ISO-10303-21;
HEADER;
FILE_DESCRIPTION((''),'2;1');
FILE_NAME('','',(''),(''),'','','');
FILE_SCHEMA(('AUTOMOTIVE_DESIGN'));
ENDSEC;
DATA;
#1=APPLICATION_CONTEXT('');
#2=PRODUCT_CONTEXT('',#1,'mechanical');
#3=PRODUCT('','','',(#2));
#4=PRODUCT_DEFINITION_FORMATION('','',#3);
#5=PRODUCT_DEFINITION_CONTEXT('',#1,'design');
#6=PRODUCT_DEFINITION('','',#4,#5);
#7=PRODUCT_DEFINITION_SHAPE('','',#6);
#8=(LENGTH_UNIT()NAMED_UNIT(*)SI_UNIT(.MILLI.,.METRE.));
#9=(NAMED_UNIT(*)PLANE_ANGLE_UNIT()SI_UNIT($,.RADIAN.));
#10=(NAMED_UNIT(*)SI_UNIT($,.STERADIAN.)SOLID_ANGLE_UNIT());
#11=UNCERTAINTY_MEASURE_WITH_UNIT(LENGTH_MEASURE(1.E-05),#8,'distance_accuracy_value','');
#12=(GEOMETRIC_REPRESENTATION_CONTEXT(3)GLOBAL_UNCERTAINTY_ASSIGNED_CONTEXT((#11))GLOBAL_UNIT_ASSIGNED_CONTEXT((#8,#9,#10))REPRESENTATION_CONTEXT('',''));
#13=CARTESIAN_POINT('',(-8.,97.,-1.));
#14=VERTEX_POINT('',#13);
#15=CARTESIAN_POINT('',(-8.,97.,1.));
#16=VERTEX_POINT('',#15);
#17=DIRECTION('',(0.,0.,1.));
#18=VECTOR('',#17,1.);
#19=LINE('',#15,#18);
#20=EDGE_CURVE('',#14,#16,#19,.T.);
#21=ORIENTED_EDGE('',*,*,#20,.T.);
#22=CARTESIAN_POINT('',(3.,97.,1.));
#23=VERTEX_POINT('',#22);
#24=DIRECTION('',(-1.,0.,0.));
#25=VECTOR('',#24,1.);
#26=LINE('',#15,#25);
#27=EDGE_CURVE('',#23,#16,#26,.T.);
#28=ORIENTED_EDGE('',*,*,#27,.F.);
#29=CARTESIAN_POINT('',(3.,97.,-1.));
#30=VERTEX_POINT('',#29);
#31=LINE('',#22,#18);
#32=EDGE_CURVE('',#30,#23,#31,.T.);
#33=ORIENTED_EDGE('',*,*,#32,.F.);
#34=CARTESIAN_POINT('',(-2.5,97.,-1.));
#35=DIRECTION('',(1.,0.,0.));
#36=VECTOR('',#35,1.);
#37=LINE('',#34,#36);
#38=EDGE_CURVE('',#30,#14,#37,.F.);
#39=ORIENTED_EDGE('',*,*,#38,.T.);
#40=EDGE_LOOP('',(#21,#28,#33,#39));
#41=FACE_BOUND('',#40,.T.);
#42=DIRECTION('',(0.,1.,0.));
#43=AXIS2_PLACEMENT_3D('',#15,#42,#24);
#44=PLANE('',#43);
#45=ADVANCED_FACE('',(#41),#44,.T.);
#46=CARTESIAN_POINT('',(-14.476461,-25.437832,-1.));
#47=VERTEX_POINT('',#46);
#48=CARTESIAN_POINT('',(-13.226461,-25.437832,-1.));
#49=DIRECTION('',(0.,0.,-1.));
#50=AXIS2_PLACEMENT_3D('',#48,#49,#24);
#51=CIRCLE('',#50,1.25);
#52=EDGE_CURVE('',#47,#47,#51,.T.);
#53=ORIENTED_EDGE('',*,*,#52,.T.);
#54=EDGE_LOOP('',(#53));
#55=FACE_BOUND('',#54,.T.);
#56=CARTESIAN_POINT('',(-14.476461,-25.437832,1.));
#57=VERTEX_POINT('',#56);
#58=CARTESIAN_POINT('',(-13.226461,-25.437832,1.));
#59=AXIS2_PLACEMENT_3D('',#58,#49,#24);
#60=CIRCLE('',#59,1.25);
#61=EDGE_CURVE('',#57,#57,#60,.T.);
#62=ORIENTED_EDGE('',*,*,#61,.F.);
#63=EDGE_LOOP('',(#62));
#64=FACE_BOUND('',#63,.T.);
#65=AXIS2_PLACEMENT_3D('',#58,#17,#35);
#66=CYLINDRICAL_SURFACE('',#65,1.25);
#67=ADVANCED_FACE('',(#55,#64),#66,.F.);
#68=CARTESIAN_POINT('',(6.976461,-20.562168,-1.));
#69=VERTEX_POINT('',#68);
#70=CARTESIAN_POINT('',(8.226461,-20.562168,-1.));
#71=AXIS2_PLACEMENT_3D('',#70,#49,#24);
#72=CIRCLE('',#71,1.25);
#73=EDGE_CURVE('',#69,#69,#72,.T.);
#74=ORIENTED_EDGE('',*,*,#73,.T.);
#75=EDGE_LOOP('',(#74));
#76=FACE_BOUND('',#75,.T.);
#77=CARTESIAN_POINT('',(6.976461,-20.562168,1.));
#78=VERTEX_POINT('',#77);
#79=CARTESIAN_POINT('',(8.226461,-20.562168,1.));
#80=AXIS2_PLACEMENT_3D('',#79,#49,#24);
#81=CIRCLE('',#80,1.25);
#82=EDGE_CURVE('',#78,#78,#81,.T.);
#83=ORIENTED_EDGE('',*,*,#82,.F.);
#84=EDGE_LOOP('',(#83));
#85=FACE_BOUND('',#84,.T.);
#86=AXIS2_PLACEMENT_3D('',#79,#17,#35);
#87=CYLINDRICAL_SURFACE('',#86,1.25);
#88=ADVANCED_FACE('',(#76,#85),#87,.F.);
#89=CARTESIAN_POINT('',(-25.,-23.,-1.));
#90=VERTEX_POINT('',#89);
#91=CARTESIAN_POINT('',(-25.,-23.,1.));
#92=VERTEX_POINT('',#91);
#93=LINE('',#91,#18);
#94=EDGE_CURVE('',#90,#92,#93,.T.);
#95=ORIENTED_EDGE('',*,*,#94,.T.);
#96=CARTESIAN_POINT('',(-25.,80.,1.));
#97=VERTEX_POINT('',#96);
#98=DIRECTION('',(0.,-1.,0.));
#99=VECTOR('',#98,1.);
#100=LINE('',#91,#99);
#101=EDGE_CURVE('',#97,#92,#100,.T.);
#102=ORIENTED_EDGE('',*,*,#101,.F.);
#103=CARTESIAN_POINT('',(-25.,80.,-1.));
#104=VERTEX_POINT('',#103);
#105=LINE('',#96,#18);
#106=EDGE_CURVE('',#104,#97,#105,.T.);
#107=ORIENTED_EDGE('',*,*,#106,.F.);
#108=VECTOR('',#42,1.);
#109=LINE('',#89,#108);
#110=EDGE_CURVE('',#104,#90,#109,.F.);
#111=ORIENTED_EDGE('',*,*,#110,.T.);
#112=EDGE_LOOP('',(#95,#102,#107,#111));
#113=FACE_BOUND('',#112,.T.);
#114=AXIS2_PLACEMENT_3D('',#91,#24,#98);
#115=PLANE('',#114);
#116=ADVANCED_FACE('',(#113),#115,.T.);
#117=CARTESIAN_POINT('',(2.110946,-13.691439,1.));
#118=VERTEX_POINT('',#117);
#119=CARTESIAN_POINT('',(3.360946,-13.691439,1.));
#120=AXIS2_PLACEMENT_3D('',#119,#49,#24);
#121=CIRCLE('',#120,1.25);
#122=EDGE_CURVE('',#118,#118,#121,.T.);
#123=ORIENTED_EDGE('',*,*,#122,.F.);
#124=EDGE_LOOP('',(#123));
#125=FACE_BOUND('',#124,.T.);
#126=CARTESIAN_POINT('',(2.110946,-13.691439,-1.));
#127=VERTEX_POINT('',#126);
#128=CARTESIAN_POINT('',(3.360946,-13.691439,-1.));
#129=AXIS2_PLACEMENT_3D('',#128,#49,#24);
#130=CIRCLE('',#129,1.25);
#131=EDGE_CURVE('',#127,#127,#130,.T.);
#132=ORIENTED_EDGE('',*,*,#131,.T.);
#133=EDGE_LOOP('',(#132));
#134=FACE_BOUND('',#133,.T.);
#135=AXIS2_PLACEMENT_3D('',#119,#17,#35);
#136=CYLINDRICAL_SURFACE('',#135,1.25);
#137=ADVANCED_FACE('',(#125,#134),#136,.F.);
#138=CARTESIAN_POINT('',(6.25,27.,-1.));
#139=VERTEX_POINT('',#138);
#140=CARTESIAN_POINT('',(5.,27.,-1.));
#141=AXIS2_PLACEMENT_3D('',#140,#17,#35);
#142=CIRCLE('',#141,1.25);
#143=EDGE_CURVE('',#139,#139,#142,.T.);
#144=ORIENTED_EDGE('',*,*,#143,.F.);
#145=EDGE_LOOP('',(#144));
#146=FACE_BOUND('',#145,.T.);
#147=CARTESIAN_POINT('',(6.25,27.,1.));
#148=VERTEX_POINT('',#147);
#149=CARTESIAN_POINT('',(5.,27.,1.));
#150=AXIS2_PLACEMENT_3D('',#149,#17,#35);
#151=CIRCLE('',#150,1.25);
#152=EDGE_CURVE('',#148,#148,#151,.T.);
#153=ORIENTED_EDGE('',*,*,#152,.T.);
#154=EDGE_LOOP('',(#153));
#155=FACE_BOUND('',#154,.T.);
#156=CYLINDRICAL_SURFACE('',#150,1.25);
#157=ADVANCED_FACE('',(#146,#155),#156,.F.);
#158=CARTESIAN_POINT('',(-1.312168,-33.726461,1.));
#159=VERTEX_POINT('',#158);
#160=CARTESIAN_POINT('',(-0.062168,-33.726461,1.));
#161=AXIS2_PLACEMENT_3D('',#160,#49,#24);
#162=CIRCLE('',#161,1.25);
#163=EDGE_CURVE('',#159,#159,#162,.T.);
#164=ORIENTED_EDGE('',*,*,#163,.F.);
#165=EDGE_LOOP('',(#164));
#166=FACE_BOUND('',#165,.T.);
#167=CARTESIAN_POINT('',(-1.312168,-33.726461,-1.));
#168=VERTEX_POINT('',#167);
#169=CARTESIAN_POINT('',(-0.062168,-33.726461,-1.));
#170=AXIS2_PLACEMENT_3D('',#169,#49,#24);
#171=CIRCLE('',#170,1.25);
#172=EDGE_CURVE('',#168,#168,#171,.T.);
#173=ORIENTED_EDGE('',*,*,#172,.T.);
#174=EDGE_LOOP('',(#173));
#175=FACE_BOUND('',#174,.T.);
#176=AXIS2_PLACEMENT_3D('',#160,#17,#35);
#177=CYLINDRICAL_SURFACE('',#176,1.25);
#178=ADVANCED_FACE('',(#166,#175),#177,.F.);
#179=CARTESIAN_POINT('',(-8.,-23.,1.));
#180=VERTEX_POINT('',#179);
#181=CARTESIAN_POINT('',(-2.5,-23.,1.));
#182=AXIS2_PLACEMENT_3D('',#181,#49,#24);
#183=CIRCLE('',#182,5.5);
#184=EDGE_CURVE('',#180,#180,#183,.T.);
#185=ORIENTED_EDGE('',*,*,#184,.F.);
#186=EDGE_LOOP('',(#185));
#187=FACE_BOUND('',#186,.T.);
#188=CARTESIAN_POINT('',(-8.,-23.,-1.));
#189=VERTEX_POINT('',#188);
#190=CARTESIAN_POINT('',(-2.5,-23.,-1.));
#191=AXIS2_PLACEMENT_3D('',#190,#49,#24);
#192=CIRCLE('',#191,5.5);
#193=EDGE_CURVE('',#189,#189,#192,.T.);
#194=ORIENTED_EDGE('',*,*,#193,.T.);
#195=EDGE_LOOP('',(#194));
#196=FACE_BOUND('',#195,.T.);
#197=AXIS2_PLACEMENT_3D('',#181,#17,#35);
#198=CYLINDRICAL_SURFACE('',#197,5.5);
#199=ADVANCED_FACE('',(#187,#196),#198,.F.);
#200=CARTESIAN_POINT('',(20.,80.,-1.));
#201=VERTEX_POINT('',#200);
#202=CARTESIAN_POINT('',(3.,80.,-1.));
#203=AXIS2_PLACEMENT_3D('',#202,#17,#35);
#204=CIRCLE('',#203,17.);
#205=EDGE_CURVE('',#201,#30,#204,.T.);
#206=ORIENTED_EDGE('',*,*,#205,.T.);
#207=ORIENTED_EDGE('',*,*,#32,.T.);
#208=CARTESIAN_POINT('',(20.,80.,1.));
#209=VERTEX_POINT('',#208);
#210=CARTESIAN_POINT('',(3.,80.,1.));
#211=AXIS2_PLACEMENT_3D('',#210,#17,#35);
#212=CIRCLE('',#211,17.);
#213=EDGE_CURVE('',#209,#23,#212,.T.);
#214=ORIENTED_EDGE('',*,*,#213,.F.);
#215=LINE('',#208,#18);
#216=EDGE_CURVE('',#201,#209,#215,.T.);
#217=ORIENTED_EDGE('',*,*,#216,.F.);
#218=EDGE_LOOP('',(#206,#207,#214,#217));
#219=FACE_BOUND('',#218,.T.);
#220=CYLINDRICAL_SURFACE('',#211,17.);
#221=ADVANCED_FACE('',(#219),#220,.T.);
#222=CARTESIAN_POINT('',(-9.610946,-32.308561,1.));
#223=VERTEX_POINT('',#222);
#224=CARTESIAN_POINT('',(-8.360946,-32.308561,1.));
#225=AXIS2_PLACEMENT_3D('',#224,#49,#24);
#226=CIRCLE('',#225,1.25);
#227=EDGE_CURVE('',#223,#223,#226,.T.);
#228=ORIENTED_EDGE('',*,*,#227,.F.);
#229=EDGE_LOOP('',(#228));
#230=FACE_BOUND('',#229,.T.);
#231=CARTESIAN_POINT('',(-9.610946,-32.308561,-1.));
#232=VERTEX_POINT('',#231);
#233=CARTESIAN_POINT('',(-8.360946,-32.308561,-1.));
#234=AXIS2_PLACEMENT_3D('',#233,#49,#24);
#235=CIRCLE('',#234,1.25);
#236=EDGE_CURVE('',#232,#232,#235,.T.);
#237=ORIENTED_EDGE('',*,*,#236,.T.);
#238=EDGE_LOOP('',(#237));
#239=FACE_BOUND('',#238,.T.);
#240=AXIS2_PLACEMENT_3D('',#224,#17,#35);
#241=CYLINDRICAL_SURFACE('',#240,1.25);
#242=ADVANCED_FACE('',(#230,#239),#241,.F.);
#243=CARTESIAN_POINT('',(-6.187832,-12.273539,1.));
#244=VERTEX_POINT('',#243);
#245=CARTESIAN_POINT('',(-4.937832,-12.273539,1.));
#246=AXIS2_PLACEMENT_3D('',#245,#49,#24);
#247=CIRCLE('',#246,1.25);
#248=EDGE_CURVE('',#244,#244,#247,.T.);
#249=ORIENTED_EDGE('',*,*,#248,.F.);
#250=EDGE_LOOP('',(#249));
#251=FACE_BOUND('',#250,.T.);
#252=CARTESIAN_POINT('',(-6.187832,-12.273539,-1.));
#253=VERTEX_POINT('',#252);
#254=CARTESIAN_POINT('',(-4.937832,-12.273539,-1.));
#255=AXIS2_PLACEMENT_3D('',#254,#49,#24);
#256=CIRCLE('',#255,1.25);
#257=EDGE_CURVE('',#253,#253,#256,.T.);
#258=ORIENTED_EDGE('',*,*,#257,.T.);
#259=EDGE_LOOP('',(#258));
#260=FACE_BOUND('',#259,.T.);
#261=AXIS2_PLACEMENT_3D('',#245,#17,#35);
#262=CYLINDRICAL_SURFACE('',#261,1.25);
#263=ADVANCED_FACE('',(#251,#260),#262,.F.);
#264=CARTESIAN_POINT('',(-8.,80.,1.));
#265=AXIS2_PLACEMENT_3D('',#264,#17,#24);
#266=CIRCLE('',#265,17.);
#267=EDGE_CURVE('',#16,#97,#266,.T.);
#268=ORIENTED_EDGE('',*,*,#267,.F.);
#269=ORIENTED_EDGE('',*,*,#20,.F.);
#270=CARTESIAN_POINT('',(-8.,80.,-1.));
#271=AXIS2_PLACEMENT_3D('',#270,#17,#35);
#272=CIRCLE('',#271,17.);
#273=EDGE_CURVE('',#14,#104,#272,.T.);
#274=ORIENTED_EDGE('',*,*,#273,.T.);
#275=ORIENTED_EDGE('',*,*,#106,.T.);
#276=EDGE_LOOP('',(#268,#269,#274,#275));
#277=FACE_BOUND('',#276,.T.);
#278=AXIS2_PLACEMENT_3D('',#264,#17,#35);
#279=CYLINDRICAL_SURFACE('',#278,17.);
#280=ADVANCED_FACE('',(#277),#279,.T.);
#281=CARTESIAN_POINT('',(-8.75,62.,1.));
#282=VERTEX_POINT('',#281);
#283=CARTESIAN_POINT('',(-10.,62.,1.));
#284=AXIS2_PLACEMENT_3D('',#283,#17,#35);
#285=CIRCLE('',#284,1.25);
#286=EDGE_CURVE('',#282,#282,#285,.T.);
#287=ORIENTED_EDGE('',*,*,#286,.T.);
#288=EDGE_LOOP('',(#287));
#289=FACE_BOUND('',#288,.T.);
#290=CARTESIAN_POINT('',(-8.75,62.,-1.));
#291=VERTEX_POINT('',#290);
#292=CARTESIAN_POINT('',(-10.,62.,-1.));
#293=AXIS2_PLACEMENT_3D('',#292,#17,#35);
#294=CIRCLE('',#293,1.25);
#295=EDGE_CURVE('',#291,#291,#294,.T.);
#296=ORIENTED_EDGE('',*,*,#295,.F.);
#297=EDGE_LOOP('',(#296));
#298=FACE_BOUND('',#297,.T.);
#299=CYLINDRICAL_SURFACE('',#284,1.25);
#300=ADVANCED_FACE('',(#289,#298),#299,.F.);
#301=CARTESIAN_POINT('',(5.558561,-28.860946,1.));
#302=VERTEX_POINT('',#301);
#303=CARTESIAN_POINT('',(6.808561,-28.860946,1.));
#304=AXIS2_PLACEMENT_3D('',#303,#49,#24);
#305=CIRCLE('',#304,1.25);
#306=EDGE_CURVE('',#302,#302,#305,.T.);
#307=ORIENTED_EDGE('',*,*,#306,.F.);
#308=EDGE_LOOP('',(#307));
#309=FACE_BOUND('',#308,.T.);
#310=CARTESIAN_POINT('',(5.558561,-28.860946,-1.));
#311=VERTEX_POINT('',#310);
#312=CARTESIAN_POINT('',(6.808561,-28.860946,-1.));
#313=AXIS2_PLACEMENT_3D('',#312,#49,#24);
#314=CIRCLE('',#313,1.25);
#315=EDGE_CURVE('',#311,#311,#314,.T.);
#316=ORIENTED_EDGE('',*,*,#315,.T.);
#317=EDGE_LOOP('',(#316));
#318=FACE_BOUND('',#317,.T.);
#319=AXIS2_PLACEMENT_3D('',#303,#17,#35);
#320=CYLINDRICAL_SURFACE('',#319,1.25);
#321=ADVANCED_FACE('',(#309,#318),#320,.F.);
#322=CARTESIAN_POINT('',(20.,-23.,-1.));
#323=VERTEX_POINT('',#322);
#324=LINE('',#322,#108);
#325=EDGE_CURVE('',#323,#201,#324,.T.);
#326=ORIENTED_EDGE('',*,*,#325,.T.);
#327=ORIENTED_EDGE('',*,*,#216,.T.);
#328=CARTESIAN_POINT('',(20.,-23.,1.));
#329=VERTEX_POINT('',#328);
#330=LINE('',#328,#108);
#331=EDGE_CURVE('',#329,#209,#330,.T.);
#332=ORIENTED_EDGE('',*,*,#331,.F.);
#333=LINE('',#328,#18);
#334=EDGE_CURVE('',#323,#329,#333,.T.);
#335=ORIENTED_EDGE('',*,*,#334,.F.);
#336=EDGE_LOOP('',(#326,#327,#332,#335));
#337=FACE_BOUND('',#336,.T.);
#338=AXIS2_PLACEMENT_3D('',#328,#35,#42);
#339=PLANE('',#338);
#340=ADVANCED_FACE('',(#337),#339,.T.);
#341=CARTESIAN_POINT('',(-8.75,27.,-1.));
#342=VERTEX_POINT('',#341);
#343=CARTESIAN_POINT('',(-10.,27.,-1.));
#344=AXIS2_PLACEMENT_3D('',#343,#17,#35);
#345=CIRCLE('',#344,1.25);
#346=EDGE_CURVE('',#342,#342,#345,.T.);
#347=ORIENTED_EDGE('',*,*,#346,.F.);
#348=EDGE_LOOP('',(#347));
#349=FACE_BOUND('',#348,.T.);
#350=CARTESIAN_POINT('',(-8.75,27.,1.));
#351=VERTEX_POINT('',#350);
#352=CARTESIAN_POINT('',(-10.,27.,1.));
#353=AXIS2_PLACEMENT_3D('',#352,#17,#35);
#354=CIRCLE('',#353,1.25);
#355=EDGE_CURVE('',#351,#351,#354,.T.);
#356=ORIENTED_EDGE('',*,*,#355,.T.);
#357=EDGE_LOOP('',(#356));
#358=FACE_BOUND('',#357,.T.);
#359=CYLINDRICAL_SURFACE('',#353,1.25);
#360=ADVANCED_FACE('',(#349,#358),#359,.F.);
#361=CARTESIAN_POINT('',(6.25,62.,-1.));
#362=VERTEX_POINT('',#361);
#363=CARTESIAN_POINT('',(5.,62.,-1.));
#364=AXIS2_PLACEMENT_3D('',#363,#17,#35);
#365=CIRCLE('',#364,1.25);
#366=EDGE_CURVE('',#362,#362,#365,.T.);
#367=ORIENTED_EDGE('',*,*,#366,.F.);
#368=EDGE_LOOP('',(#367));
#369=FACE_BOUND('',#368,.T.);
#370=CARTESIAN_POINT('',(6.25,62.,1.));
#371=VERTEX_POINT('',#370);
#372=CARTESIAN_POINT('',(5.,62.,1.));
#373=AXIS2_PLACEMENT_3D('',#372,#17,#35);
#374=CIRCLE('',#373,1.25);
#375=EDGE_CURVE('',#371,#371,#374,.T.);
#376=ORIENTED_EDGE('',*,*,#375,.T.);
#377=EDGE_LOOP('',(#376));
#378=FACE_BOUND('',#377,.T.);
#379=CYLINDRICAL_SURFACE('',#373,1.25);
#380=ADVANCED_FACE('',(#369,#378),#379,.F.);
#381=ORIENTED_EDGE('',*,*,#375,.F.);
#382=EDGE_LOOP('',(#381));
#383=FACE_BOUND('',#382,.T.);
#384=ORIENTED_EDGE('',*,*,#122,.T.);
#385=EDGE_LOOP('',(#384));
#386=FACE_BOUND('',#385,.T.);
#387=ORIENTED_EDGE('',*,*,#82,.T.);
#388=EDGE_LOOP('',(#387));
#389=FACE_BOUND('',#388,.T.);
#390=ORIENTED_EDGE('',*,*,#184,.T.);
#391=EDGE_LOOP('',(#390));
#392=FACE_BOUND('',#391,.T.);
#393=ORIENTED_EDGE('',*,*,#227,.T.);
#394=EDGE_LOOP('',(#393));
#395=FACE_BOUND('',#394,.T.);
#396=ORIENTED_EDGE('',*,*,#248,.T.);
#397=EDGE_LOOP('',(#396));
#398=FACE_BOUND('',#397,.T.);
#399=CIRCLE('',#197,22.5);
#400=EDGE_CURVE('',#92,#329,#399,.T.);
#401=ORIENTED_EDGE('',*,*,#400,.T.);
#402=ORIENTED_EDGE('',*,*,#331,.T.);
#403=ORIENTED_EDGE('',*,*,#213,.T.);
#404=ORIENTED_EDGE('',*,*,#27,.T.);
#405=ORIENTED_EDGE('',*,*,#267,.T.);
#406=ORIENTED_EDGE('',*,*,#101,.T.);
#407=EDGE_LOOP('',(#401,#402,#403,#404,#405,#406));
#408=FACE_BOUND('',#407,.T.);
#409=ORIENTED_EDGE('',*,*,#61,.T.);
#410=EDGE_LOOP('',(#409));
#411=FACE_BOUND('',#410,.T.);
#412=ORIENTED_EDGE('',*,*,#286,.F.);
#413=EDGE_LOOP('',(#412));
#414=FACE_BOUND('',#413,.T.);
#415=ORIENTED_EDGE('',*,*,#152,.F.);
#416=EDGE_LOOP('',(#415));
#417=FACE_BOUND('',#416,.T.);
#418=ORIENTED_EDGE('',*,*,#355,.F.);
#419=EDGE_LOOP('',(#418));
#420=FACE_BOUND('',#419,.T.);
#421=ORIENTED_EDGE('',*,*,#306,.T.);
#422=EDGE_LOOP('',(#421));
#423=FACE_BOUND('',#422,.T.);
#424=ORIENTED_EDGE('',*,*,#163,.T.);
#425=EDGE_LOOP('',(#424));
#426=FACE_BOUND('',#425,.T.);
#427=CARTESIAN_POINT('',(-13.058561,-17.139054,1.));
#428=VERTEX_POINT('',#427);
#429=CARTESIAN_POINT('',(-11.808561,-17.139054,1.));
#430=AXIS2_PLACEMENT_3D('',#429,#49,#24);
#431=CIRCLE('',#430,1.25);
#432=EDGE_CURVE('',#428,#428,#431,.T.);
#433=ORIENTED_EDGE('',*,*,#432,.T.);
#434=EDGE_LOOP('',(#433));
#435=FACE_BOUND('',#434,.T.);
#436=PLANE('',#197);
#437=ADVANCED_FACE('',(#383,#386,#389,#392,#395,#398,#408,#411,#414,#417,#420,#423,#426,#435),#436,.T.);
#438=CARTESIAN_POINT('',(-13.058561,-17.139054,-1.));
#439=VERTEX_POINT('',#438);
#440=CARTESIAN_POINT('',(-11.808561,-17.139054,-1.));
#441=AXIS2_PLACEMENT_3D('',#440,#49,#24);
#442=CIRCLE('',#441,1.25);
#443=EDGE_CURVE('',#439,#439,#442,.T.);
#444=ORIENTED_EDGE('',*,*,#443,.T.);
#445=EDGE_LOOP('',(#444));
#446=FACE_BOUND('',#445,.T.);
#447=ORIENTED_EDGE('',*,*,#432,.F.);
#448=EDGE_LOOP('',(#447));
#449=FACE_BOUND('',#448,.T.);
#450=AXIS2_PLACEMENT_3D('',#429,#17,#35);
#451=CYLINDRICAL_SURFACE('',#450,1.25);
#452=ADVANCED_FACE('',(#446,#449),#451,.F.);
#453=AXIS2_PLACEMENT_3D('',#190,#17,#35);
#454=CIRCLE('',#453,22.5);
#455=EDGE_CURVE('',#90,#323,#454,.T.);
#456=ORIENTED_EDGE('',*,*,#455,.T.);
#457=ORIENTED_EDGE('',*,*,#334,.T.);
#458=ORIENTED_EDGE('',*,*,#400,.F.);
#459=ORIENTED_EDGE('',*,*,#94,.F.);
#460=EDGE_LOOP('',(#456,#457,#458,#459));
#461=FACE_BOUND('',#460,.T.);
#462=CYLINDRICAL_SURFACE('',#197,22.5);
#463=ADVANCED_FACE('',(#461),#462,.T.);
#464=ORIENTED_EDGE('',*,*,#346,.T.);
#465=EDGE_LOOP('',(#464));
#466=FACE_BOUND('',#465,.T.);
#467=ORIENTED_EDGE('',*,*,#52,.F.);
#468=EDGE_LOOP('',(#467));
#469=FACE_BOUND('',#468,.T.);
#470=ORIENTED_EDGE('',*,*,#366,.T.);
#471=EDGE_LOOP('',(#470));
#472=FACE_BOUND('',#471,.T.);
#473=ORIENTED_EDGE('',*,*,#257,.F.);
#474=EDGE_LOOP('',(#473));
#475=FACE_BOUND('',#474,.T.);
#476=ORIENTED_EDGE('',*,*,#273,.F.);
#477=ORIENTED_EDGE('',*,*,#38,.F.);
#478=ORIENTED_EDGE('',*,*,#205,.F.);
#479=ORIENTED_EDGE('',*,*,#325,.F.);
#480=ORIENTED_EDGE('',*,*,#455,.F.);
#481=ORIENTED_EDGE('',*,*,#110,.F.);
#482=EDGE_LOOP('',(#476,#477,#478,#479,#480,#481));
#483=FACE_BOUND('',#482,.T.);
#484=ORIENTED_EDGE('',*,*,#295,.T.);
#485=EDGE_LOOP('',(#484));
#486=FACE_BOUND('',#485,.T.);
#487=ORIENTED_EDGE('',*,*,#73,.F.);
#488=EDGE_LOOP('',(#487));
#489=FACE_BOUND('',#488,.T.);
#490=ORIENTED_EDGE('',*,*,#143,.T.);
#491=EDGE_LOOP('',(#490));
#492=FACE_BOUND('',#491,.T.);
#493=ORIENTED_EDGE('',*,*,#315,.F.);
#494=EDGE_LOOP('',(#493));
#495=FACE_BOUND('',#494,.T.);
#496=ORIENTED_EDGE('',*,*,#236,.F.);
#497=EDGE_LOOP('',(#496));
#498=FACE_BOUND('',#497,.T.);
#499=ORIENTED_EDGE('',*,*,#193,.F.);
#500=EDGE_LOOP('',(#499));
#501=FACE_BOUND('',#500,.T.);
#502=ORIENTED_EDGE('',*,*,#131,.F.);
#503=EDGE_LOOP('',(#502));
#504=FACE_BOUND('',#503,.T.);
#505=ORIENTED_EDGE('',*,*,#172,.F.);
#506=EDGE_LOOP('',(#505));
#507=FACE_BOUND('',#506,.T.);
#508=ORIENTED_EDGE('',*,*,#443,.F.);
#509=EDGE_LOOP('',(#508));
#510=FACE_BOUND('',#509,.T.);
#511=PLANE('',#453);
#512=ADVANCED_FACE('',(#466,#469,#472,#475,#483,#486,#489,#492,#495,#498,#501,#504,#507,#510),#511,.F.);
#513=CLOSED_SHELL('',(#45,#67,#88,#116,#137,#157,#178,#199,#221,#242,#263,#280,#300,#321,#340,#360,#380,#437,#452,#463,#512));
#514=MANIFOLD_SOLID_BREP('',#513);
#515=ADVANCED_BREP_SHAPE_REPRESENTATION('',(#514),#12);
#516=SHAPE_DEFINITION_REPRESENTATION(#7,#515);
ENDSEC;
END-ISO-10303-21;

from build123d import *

# Parameters (mm, degrees)
RESSALTO_EXTRUS_O1_DEPTH = 1
ESBO_O2_R                = 5.5
CORTE_EXTRUS_O1_DEPTH    = 101.189819842
ESBO_O3_R                = 1.25
CORTE_EXTRUS_O2_DEPTH    = 101.189819842
ESBO_O8_R                = 1.25
CORTE_EXTRUS_O3_DEPTH    = 17


with BuildPart() as part:
    # Esboço1 → Ressalto-extrusão1 (new, symmetric)
    with BuildSketch(Plane.XY):
        with BuildLine():
            Line((-25, -23), (-25, 80))
            ThreePointArc((-25, 80), (-20.02081528, 92.02081528), (-8, 97))
            Line((-8, 97), (3, 97))
            ThreePointArc((3, 97), (15.02081528, 92.02081528), (20, 80))
            Line((20, 80), (20, -23))
            ThreePointArc((20, -23), (-2.5, -45.5), (-25, -23))
        make_face()
    extrude(amount=RESSALTO_EXTRUS_O1_DEPTH, both=True)

    # Esboço2 → Corte-extrusão1 (cut, through all)
    with BuildSketch(Plane(origin=(0, 0, -1), x_dir=(-1, 0, 0), z_dir=(0, 0, -1))):
        with Locations((2.5, -23)):
            Circle(ESBO_O2_R)
    extrude(amount=-CORTE_EXTRUS_O1_DEPTH, mode=Mode.SUBTRACT)

    # Esboço3 → Corte-extrusão2 (cut, through all)
    with BuildSketch(Plane(origin=(0, 0, -1), x_dir=(-1, 0, 0), z_dir=(0, 0, -1))):
        with Locations((0.062167861, -33.726461414)):
            Circle(ESBO_O3_R)
        with Locations((-6.808561241, -28.860945967)):
            Circle(ESBO_O3_R)
        with Locations((-8.226461414, -20.562167861)):
            Circle(ESBO_O3_R)
        with Locations((-3.360945967, -13.691438759)):
            Circle(ESBO_O3_R)
        with Locations((4.937832139, -12.273538586)):
            Circle(ESBO_O3_R)
        with Locations((11.808561241, -17.139054033)):
            Circle(ESBO_O3_R)
        with Locations((13.226461414, -25.437832139)):
            Circle(ESBO_O3_R)
        with Locations((8.360945967, -32.308561241)):
            Circle(ESBO_O3_R)
    extrude(amount=-CORTE_EXTRUS_O2_DEPTH, mode=Mode.SUBTRACT)

    # Esboço8 → Corte-extrusão3 (cut)
    with BuildSketch(Plane.XY.offset(1)):
        with Locations((-10, 62)):
            Circle(ESBO_O8_R)
        with Locations((-10, 27)):
            Circle(ESBO_O8_R)
        with Locations((5, 62)):
            Circle(ESBO_O8_R)
        with Locations((5, 27)):
            Circle(ESBO_O8_R)
    extrude(amount=-CORTE_EXTRUS_O3_DEPTH, mode=Mode.SUBTRACT)


solid = part.part
